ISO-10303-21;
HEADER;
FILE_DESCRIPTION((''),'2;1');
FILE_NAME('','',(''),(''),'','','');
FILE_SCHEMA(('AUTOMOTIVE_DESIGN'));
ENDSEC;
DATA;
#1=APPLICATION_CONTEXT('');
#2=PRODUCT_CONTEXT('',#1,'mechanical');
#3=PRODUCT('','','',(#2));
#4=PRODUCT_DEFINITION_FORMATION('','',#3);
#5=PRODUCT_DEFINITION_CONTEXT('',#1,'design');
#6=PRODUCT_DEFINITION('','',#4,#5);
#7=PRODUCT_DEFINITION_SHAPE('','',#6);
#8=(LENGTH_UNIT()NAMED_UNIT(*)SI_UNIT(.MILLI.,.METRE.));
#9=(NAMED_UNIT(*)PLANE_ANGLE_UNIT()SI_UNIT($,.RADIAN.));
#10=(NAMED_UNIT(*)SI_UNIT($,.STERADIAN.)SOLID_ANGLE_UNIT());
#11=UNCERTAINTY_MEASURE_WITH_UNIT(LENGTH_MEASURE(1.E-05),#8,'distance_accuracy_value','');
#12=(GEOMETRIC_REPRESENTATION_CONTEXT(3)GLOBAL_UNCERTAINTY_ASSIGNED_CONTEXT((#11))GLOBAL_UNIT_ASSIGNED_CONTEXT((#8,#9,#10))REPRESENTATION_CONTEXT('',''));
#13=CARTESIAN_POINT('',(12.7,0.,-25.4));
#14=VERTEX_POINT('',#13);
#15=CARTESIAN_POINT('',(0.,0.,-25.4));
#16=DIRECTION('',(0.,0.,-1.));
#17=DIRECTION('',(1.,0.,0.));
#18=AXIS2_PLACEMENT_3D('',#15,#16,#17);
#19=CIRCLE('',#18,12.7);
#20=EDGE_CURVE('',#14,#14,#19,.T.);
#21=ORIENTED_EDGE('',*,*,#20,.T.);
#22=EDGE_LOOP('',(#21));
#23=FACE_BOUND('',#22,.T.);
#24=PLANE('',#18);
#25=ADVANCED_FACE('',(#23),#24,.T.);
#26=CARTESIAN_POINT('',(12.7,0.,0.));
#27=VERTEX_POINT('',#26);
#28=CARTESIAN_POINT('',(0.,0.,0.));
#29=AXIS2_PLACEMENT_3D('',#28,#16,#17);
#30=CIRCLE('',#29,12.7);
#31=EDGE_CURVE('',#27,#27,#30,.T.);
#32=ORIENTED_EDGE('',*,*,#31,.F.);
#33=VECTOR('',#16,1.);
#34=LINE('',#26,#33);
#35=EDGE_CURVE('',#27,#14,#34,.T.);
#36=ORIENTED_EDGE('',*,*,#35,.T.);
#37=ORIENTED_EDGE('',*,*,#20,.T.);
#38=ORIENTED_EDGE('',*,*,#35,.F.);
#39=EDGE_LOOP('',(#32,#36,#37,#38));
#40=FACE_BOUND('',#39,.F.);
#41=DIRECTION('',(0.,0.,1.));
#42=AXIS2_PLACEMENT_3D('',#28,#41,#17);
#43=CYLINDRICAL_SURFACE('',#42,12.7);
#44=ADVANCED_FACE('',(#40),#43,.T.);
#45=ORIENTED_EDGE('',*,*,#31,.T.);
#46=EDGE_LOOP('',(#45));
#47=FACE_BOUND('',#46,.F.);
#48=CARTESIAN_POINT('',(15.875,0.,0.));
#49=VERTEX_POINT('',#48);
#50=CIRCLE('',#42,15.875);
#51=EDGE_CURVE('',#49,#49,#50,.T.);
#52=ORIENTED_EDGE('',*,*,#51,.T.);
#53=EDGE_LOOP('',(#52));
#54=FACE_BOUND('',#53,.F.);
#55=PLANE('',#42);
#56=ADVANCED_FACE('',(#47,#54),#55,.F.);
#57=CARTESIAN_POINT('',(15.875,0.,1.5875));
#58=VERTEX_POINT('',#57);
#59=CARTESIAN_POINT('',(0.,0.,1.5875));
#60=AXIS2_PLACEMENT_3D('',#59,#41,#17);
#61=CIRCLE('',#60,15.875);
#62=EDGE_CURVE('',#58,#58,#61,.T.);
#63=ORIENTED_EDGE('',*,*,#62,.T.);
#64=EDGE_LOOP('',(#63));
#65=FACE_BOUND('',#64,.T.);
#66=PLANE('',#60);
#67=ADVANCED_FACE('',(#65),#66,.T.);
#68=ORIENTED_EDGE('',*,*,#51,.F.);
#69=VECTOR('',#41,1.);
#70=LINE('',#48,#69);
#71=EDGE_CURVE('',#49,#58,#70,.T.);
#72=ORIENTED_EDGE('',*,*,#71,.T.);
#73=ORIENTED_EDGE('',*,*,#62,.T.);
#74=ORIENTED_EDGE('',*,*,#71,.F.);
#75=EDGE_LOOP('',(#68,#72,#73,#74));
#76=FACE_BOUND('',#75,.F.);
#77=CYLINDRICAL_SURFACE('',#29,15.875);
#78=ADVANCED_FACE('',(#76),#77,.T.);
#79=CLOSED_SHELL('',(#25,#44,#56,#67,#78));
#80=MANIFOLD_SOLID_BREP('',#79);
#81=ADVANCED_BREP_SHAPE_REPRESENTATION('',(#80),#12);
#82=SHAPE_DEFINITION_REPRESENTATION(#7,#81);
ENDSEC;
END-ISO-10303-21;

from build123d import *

# Parameters (mm, degrees)
F0_R     = 15.875
F1_DEPTH = 1.5875
F2_R     = 12.7
F3_DEPTH = 25.4


# Not quite as in the source:
# - a length typed as a fraction of an inch, garbled in the dataset ("3 / 203.2 mm" for 3/8 in), is restored


with BuildPart() as f1:
    # F0 (on Top) → F1 (new body)
    with BuildSketch(Plane.XY):
        Circle(F0_R)
    extrude(amount=F1_DEPTH)

    # F2 (on face) → F3 (join)
    with BuildSketch(Plane(origin=(0, 0, 0), x_dir=(1, 0, 0), z_dir=(0, 0, -1))):
        Circle(F2_R)
    extrude(amount=F3_DEPTH)


solid = f1.part
